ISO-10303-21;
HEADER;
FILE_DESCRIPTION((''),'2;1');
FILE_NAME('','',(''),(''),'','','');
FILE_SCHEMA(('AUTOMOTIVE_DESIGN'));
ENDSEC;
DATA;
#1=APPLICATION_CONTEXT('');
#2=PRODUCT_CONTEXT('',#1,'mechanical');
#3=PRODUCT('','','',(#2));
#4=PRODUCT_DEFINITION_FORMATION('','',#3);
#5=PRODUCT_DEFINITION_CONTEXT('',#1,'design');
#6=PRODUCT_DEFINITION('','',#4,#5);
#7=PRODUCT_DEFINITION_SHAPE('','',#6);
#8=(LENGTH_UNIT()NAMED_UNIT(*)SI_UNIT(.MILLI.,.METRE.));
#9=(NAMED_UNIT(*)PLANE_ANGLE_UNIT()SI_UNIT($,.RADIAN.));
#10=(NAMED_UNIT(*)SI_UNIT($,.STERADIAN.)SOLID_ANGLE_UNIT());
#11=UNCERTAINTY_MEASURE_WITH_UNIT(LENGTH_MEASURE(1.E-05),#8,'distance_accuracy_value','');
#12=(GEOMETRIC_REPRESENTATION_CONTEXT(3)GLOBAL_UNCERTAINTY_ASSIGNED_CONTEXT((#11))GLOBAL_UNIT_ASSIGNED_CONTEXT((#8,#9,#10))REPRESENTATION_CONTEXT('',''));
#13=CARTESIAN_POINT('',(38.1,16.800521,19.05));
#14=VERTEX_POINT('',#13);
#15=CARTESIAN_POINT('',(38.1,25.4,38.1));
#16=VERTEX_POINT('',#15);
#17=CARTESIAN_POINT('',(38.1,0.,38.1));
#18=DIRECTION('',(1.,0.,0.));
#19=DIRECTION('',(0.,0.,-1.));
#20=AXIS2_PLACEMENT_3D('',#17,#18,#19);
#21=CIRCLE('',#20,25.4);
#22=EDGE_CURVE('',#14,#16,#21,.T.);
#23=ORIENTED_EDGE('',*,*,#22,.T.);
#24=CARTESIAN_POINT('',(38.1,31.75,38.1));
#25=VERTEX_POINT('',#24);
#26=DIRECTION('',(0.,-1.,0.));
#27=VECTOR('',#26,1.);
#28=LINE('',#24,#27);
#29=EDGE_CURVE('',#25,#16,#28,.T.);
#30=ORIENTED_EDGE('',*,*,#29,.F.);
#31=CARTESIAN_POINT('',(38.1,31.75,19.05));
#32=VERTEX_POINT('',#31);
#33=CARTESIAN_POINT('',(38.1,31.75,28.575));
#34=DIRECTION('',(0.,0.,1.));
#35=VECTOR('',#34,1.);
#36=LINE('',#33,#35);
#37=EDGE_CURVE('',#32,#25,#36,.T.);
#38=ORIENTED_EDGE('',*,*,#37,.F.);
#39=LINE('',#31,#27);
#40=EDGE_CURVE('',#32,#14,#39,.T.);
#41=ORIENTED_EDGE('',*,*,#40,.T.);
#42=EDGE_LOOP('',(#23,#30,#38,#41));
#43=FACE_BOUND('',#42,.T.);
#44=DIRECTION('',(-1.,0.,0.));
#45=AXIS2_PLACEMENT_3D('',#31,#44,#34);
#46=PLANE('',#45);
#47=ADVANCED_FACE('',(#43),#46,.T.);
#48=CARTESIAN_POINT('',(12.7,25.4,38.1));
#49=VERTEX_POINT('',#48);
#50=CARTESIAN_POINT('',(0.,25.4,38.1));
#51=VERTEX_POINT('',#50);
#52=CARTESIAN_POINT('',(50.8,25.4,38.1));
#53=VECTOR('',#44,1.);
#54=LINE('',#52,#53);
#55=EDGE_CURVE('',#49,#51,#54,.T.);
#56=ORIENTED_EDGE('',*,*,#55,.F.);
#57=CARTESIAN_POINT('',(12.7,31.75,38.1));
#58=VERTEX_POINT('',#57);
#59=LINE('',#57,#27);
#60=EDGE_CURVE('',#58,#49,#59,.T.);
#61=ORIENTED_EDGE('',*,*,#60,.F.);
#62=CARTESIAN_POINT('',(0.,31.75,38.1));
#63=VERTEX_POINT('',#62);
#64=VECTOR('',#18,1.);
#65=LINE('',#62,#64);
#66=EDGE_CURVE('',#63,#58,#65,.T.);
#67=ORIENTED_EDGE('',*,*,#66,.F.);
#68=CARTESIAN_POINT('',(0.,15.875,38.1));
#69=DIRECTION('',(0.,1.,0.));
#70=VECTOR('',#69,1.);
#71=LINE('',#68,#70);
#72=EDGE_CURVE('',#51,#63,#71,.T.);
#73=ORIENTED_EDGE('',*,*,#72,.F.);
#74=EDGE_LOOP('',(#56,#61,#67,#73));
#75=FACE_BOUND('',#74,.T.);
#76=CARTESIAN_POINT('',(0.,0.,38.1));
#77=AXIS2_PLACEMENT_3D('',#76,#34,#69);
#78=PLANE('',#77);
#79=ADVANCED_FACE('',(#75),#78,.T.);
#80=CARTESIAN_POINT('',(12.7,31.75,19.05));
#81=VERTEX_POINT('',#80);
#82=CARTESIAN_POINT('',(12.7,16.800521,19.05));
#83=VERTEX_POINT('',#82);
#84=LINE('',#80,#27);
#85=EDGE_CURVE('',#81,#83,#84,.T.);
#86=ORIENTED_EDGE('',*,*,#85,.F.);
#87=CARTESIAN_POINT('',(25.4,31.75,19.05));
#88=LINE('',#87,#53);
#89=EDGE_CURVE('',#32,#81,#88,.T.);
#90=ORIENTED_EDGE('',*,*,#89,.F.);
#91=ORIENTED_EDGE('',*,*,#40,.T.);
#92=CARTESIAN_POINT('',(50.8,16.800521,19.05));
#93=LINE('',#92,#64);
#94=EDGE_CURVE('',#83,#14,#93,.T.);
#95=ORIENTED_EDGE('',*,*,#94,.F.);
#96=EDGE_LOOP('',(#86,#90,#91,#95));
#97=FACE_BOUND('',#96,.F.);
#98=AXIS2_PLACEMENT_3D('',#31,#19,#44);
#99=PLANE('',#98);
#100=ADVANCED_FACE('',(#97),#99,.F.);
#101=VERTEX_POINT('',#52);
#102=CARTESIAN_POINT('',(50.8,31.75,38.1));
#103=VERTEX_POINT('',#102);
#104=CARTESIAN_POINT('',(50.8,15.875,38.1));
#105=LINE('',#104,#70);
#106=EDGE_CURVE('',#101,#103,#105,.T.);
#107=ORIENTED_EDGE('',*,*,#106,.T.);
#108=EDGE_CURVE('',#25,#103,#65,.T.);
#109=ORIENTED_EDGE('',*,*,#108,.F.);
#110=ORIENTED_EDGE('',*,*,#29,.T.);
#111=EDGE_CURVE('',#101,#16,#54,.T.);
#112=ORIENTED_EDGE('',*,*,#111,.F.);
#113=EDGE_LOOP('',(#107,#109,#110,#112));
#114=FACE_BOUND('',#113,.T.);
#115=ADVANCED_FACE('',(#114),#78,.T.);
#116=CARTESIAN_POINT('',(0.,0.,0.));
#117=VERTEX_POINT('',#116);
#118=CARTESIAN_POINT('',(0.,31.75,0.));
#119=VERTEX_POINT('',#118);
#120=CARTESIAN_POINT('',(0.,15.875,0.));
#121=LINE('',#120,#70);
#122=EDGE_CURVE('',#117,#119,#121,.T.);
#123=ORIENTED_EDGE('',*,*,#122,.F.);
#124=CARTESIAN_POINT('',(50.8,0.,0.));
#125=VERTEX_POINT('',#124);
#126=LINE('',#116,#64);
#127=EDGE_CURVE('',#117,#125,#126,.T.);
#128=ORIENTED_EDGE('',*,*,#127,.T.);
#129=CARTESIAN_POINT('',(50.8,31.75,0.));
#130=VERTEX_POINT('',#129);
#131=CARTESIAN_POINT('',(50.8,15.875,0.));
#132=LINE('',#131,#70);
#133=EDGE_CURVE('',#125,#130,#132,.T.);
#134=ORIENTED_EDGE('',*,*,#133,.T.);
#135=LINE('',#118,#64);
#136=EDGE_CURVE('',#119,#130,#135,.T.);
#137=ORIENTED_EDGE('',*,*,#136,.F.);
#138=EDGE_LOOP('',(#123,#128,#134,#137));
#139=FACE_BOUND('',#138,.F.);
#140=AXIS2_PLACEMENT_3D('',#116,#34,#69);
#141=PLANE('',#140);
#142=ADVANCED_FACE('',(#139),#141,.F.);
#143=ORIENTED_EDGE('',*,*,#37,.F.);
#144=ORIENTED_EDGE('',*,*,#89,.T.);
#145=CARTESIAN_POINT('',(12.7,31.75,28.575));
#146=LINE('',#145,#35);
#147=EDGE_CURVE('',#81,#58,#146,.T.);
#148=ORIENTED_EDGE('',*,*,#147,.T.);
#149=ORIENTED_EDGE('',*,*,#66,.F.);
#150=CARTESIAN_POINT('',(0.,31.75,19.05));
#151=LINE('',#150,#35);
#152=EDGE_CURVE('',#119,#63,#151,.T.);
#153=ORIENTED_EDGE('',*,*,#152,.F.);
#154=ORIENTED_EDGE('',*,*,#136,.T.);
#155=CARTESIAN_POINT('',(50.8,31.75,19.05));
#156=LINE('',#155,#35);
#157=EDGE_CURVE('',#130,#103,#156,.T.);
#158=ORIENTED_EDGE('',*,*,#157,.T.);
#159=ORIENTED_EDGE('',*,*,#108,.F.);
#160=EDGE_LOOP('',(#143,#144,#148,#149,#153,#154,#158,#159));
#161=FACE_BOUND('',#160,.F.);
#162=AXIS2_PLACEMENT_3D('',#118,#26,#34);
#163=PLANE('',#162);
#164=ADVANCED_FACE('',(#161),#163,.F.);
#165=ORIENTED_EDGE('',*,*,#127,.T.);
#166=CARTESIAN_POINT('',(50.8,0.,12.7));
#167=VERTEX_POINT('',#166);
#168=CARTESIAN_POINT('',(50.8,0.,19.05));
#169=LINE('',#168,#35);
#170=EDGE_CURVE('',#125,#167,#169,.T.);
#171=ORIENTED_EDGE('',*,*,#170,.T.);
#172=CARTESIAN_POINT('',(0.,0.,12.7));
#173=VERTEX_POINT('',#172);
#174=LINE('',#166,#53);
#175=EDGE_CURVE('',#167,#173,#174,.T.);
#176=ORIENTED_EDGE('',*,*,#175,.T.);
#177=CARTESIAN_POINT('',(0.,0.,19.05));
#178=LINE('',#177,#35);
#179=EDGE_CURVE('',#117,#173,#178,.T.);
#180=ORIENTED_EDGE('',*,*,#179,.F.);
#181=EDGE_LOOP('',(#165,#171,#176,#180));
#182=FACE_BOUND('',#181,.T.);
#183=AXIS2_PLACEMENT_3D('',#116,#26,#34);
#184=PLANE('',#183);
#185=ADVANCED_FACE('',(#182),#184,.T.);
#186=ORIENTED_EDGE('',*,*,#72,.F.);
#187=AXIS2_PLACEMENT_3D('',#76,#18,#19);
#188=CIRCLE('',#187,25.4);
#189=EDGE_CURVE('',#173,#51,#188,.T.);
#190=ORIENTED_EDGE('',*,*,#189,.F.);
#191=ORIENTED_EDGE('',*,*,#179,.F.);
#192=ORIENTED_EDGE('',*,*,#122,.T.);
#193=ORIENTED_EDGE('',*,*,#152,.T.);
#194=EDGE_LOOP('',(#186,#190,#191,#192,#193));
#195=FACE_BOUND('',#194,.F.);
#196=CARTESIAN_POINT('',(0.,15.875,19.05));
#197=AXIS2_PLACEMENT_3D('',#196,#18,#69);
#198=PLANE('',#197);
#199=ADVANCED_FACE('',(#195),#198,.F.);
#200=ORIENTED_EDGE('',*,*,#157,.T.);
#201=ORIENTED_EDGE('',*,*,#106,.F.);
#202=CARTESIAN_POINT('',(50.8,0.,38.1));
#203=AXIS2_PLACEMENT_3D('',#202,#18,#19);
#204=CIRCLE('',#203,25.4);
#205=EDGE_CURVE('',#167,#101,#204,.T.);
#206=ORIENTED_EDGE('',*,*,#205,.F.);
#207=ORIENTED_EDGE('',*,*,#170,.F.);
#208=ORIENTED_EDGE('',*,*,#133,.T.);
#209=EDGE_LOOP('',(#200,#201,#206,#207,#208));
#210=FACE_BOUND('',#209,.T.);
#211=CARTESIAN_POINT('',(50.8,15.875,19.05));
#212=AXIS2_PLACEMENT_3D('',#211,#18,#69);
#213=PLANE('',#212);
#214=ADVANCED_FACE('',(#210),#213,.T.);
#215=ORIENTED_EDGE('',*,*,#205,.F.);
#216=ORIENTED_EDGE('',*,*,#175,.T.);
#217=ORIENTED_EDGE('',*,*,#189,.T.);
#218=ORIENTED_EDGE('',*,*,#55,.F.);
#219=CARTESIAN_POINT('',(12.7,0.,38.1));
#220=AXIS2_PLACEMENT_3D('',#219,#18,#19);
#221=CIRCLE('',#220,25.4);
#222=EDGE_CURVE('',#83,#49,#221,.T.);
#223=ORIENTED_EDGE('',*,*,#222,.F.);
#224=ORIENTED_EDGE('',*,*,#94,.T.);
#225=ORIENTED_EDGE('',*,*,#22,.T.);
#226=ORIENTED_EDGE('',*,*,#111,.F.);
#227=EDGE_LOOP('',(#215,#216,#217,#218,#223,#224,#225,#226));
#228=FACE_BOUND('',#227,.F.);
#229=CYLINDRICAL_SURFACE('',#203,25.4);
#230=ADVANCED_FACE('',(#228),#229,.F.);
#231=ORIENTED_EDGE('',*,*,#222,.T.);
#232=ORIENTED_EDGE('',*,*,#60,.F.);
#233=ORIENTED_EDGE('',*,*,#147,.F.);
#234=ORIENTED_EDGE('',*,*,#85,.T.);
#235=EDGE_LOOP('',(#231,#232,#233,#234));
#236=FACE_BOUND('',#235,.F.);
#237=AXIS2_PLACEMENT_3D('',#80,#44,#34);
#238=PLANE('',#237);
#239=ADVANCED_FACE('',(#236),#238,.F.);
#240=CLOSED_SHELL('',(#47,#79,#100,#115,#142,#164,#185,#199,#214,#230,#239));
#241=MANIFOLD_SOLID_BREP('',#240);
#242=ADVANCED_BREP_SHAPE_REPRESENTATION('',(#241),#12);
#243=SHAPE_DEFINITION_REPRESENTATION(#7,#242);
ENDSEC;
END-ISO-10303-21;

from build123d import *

# Parameters (mm, degrees)
F0_W     = 31.75
F0_H     = 38.1
F1_DEPTH = 50.8
F3_DEPTH = 50.801
F4_W     = 25.4
F4_H     = 19.05
F5_DEPTH = 31.751


# Not quite as in the source:
# - a feature names something its author has since deleted; it is built from what else it names


with BuildPart() as f1:
    # F0 (on Right) → F1 (new body)
    with BuildSketch(Plane.YZ):
        with Locations((15.875, 19.05)):
            Rectangle(F0_W, F0_H)
    extrude(amount=F1_DEPTH)

    # F2 (on face) → F3 (cut, through all)
    with BuildSketch(Plane.YZ.offset(50.8)):
        with BuildLine():
            Line((0, 38.1), (25.4, 38.1))
            ThreePointArc((25.4, 38.1), (-17.9605122421, 56.0605122421), (0, 12.7))
            Line((0, 12.7), (0, 38.1))
        make_face()
        with BuildLine():
            ThreePointArc((0, 12.7), (17.9605122421, 20.1394877579), (25.4, 38.1))
            Line((25.4, 38.1), (0, 38.1))
            Line((0, 38.1), (0, 12.7))
        make_face()
    extrude(amount=-F3_DEPTH, mode=Mode.SUBTRACT)

    # F4 (on face) → F5 (cut, through all)
    with BuildSketch(Plane(origin=(0, 31.75, 0), x_dir=(-1, 0, 0), z_dir=(0, 1, 0))):
        with Locations((-25.4, 28.575)):
            Rectangle(F4_W, F4_H)
    extrude(amount=-F5_DEPTH, mode=Mode.SUBTRACT)


solid = f1.part
